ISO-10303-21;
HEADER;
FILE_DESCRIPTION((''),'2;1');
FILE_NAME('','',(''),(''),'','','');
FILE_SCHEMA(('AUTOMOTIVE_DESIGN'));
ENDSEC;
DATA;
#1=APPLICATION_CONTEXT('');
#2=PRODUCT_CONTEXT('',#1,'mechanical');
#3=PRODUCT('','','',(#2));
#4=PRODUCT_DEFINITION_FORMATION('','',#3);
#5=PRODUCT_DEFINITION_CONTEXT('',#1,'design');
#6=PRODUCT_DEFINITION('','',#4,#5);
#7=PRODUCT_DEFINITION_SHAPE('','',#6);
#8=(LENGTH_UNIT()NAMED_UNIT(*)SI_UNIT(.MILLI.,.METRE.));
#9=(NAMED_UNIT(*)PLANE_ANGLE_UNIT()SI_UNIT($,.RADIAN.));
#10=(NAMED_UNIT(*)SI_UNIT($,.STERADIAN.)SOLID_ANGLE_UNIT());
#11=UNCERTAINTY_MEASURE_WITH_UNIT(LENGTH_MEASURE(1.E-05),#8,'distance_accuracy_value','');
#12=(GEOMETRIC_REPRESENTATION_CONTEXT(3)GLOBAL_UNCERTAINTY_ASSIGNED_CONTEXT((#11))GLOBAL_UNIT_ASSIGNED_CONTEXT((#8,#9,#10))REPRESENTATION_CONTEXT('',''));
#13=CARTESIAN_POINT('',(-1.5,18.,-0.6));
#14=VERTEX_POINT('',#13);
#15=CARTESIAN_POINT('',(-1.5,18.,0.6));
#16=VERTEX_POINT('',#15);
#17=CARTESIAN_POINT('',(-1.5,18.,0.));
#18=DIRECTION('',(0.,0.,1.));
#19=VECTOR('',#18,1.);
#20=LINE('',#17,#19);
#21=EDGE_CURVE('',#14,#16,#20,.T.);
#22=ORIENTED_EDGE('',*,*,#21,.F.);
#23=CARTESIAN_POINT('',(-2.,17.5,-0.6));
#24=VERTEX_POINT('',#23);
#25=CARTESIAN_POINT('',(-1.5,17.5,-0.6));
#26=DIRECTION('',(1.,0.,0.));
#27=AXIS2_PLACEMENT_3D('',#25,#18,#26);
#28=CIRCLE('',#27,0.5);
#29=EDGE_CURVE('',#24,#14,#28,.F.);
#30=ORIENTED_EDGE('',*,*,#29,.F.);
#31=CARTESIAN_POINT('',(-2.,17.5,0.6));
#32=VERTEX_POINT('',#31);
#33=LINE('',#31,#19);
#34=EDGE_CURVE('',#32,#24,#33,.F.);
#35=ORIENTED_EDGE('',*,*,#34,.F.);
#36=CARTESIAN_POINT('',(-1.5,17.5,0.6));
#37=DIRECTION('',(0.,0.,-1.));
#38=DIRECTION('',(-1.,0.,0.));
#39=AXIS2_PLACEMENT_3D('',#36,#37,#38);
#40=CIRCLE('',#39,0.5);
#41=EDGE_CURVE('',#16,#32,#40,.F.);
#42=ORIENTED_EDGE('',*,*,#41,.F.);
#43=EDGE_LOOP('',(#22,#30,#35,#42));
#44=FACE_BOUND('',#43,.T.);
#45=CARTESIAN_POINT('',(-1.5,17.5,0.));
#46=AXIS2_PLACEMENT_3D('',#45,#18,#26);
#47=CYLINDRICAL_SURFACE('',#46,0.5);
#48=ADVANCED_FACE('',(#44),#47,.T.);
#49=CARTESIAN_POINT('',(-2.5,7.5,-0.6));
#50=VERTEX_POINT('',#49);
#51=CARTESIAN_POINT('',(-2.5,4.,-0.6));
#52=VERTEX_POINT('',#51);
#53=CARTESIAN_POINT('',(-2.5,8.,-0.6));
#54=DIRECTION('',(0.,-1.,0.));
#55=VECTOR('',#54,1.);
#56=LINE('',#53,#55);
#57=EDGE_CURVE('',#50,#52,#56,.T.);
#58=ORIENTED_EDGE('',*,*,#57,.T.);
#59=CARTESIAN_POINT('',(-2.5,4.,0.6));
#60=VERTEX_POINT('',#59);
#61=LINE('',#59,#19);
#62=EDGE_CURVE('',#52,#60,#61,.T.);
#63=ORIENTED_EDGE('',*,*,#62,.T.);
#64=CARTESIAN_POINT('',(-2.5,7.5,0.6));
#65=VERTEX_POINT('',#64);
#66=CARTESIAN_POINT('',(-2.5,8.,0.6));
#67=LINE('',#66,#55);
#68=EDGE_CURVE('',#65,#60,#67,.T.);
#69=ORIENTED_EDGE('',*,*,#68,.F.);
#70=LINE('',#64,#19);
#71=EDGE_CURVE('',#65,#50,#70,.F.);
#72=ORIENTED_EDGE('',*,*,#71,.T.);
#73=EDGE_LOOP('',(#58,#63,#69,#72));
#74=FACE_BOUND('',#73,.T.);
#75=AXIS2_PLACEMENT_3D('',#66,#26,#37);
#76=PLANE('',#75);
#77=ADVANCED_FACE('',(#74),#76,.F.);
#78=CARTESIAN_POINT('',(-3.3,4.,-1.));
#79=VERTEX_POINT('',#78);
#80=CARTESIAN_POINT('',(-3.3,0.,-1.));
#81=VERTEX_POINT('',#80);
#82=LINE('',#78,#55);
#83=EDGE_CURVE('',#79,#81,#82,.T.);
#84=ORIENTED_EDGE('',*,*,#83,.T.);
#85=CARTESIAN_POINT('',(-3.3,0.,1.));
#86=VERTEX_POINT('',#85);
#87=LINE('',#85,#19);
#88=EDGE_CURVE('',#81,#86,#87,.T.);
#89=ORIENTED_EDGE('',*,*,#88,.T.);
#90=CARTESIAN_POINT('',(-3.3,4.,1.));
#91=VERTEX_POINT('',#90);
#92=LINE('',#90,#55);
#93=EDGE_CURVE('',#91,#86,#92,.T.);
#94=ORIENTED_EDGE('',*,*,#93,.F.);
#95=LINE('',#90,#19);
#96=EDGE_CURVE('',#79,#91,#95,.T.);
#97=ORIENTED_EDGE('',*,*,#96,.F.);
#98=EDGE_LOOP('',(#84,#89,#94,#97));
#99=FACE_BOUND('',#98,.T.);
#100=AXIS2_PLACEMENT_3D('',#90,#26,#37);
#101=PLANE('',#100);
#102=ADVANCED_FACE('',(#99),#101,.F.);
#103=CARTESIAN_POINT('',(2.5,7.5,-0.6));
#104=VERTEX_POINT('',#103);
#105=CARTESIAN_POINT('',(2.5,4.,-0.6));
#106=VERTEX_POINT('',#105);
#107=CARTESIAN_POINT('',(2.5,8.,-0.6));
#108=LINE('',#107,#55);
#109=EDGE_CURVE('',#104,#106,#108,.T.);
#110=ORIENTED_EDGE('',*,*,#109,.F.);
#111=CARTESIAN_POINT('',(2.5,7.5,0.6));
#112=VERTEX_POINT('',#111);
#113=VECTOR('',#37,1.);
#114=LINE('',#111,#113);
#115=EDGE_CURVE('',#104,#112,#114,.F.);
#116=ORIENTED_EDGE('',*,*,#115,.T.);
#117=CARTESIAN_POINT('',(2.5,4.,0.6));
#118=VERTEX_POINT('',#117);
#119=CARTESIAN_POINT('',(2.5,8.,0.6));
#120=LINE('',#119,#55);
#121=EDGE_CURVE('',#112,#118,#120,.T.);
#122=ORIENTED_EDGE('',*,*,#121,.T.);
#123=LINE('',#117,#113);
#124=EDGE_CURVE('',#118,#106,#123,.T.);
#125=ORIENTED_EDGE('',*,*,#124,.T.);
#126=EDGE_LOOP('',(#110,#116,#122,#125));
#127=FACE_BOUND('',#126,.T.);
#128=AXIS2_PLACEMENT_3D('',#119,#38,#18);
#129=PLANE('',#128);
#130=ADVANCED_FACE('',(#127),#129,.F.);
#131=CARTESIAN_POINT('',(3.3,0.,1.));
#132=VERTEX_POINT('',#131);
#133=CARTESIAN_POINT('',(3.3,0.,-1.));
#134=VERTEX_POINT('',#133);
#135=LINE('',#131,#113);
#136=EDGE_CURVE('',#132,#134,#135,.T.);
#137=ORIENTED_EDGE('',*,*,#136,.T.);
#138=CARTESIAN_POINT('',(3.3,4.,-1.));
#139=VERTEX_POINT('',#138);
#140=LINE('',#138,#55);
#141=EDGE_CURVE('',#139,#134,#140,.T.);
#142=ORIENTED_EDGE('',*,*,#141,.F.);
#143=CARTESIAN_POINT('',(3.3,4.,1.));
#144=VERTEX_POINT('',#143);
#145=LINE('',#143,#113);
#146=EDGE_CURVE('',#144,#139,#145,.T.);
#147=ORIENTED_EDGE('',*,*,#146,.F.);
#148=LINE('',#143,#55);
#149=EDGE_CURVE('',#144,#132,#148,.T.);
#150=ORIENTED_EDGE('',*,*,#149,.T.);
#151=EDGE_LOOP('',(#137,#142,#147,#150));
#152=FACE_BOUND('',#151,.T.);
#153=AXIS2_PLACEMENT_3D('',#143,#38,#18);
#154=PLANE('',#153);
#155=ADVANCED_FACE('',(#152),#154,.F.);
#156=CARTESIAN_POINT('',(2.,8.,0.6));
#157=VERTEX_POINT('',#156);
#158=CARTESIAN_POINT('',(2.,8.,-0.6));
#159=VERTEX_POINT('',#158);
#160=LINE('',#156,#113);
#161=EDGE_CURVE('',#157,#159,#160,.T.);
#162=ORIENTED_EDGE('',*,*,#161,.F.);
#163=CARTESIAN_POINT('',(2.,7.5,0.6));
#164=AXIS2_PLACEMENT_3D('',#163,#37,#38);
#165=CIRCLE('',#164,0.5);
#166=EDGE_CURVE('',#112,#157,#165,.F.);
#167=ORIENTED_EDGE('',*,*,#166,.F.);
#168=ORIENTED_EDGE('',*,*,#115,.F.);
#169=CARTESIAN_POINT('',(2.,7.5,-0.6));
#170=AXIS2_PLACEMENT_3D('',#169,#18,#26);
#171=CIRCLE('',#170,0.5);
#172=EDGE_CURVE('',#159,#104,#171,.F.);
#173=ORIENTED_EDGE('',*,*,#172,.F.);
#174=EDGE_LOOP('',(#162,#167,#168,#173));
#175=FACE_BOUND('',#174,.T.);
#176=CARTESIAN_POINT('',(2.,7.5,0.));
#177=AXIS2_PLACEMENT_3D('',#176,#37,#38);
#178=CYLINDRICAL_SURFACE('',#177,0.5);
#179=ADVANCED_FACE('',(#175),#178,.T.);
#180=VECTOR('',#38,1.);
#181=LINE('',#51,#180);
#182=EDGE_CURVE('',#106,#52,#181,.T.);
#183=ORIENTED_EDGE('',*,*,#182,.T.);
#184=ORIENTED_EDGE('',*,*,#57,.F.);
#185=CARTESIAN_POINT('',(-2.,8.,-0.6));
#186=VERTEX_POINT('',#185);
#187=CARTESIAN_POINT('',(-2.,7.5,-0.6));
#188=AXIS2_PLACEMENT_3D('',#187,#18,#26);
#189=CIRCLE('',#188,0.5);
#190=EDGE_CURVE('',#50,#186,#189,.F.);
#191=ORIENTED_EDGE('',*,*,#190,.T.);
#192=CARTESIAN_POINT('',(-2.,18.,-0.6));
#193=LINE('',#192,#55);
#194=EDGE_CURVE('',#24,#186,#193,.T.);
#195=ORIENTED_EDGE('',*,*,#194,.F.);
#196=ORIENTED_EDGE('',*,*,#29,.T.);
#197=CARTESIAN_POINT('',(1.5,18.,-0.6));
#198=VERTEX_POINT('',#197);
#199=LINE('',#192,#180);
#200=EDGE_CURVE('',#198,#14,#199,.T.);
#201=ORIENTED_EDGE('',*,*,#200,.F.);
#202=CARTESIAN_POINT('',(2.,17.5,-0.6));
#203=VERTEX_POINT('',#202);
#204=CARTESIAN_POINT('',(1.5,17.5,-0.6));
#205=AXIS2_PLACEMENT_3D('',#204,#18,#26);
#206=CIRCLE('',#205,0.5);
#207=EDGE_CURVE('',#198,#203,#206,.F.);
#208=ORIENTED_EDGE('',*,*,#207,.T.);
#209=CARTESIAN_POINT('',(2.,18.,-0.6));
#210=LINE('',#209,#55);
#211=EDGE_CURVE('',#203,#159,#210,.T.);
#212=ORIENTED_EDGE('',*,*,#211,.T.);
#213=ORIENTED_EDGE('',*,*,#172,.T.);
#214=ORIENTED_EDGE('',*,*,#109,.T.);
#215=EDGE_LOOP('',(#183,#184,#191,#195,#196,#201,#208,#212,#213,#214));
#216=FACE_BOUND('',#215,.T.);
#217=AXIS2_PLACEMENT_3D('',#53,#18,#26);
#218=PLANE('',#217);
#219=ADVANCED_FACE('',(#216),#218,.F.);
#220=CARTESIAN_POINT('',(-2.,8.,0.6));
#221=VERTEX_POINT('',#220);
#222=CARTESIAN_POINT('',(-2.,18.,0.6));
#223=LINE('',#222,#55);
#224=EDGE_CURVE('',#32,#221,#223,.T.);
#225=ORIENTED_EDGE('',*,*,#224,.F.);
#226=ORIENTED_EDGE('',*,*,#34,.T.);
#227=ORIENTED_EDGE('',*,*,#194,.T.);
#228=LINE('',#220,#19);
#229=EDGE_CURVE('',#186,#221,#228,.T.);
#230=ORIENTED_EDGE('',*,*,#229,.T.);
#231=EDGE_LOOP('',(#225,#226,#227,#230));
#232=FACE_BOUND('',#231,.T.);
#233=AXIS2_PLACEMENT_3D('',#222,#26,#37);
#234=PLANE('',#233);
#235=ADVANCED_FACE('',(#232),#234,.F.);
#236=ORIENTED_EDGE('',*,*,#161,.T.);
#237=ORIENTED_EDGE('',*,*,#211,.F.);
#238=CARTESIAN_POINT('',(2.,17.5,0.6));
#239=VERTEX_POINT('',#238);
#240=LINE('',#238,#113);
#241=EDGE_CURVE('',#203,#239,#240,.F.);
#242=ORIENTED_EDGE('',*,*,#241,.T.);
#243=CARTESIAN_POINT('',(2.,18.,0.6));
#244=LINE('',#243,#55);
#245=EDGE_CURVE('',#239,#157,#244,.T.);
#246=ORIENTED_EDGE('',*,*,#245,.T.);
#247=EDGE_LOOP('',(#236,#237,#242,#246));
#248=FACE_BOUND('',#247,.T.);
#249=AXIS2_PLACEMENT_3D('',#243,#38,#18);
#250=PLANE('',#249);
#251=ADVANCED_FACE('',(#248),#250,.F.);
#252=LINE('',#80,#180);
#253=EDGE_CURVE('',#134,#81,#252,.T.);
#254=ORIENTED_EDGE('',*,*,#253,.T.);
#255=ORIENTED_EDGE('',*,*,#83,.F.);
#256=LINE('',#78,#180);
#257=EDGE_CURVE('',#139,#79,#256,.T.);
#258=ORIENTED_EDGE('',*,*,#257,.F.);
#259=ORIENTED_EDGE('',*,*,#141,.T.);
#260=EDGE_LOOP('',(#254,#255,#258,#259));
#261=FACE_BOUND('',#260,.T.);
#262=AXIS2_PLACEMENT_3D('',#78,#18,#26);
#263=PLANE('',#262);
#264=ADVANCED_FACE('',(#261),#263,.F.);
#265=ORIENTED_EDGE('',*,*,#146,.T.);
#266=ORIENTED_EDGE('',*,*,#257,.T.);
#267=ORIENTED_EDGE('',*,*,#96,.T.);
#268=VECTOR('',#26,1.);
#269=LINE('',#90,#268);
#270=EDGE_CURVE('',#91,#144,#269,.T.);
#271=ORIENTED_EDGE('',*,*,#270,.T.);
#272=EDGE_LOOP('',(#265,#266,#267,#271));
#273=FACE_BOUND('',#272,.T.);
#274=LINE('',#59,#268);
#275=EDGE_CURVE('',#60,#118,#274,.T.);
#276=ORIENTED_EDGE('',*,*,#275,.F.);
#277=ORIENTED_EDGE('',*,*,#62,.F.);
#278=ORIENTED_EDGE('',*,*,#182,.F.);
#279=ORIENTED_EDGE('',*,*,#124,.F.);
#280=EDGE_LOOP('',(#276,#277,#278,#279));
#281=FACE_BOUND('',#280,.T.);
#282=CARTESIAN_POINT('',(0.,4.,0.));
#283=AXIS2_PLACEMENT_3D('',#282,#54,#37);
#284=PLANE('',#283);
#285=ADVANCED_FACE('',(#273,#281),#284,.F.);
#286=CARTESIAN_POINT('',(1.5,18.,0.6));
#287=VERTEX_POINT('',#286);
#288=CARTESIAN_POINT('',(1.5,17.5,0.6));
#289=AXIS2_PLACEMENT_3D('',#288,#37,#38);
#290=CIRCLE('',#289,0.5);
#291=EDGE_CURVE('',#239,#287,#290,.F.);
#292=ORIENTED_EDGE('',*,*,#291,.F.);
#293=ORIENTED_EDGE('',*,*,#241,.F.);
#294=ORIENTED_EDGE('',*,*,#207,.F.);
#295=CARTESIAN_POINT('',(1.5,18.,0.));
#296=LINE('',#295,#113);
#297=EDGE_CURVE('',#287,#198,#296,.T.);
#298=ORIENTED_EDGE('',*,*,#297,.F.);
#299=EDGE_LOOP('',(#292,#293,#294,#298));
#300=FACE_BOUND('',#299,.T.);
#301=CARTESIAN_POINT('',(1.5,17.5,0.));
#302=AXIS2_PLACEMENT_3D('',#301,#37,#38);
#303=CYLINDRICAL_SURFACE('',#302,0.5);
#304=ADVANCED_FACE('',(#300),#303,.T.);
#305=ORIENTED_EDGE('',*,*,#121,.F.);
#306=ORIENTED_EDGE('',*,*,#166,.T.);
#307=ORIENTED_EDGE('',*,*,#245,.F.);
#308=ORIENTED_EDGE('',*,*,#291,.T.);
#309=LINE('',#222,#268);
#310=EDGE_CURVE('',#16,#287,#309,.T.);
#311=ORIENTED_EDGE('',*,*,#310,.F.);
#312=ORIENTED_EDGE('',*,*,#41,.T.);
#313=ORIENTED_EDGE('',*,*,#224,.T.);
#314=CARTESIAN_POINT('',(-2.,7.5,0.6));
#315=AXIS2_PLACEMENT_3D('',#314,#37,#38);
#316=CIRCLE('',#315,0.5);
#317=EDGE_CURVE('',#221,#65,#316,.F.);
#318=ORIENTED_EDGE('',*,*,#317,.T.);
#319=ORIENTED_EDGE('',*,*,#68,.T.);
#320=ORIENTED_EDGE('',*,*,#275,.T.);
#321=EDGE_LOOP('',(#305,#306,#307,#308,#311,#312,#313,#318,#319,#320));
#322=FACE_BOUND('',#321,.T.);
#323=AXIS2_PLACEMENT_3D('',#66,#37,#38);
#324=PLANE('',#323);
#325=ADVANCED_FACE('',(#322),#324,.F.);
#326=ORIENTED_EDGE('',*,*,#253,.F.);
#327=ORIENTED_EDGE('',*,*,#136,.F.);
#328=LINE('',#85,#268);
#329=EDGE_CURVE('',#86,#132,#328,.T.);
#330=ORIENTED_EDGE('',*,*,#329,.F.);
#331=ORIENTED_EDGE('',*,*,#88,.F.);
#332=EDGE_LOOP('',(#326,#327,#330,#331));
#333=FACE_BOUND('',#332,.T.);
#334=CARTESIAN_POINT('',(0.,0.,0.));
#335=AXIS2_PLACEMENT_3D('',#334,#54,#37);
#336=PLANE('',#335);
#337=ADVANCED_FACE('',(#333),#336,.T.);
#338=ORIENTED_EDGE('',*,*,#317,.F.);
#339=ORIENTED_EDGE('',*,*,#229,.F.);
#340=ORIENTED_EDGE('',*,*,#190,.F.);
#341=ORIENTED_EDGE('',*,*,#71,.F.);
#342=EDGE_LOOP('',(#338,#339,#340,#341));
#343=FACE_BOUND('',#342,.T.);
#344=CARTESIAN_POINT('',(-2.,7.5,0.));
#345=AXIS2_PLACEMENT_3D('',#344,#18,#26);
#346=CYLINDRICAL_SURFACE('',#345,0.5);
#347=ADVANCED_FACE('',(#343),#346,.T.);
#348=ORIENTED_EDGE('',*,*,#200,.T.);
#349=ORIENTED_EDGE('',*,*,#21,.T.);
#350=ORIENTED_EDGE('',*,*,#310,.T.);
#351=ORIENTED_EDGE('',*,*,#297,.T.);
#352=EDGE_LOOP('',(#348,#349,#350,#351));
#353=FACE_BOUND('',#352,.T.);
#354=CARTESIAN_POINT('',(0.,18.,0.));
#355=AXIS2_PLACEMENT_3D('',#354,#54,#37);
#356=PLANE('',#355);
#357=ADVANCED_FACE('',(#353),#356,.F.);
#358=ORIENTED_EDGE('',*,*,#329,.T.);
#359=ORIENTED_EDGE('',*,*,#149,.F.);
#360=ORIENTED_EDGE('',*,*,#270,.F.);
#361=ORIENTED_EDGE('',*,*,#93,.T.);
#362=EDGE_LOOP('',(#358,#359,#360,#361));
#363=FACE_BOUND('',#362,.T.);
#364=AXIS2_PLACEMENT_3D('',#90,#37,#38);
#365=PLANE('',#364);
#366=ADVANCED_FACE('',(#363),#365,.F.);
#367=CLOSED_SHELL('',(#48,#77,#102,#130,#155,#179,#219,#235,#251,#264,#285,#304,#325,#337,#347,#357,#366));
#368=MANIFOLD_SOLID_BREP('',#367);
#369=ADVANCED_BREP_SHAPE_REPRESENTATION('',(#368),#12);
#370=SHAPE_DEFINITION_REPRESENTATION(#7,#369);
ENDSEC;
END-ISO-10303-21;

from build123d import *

# Parameters (mm, degrees)
SKETCH2_W           = 6.6
SKETCH2_H           = 2
BOSS_EXTRUDE1_DEPTH = 4
SKETCH3_W           = 5
SKETCH3_H           = 1.2
BOSS_EXTRUDE2_DEPTH = 4
SKETCH4_W           = 4
SKETCH4_H           = 1.2
BOSS_EXTRUDE3_DEPTH = 10
FILLET3_R           = 0.5


with BuildPart() as part:
    # Sketch2 → Boss-Extrude1 (new body)
    with BuildSketch(Plane(origin=(0, 0, 0), x_dir=(1, 0, 0), z_dir=(0, 1, 0))):
        Rectangle(SKETCH2_W, SKETCH2_H)
    extrude(amount=BOSS_EXTRUDE1_DEPTH)

    # Sketch3 → Boss-Extrude2 (add)
    with BuildSketch(Plane(origin=(0, 4, 0), x_dir=(1, 0, 0), z_dir=(0, 1, 0))):
        Rectangle(SKETCH3_W, SKETCH3_H)
    extrude(amount=BOSS_EXTRUDE2_DEPTH)

    # Sketch4 → Boss-Extrude3 (add)
    with BuildSketch(Plane(origin=(0, 8, 0), x_dir=(1, 0, 0), z_dir=(0, 1, 0))):
        Rectangle(SKETCH4_W, SKETCH4_H)
    extrude(amount=BOSS_EXTRUDE3_DEPTH)

    # Fillet3
    fillet3_edges = [part.edges().sort_by_distance(p)[0] for p in [
        (2.5, 8, 0),
        (-2.5, 8, 0),
        (2, 18, 0),
        (-2, 18, 0),
    ]]
    fillet(fillet3_edges, radius=FILLET3_R - 0.0001)  # a hair under: the kernel refuses the full size


solid = part.part
